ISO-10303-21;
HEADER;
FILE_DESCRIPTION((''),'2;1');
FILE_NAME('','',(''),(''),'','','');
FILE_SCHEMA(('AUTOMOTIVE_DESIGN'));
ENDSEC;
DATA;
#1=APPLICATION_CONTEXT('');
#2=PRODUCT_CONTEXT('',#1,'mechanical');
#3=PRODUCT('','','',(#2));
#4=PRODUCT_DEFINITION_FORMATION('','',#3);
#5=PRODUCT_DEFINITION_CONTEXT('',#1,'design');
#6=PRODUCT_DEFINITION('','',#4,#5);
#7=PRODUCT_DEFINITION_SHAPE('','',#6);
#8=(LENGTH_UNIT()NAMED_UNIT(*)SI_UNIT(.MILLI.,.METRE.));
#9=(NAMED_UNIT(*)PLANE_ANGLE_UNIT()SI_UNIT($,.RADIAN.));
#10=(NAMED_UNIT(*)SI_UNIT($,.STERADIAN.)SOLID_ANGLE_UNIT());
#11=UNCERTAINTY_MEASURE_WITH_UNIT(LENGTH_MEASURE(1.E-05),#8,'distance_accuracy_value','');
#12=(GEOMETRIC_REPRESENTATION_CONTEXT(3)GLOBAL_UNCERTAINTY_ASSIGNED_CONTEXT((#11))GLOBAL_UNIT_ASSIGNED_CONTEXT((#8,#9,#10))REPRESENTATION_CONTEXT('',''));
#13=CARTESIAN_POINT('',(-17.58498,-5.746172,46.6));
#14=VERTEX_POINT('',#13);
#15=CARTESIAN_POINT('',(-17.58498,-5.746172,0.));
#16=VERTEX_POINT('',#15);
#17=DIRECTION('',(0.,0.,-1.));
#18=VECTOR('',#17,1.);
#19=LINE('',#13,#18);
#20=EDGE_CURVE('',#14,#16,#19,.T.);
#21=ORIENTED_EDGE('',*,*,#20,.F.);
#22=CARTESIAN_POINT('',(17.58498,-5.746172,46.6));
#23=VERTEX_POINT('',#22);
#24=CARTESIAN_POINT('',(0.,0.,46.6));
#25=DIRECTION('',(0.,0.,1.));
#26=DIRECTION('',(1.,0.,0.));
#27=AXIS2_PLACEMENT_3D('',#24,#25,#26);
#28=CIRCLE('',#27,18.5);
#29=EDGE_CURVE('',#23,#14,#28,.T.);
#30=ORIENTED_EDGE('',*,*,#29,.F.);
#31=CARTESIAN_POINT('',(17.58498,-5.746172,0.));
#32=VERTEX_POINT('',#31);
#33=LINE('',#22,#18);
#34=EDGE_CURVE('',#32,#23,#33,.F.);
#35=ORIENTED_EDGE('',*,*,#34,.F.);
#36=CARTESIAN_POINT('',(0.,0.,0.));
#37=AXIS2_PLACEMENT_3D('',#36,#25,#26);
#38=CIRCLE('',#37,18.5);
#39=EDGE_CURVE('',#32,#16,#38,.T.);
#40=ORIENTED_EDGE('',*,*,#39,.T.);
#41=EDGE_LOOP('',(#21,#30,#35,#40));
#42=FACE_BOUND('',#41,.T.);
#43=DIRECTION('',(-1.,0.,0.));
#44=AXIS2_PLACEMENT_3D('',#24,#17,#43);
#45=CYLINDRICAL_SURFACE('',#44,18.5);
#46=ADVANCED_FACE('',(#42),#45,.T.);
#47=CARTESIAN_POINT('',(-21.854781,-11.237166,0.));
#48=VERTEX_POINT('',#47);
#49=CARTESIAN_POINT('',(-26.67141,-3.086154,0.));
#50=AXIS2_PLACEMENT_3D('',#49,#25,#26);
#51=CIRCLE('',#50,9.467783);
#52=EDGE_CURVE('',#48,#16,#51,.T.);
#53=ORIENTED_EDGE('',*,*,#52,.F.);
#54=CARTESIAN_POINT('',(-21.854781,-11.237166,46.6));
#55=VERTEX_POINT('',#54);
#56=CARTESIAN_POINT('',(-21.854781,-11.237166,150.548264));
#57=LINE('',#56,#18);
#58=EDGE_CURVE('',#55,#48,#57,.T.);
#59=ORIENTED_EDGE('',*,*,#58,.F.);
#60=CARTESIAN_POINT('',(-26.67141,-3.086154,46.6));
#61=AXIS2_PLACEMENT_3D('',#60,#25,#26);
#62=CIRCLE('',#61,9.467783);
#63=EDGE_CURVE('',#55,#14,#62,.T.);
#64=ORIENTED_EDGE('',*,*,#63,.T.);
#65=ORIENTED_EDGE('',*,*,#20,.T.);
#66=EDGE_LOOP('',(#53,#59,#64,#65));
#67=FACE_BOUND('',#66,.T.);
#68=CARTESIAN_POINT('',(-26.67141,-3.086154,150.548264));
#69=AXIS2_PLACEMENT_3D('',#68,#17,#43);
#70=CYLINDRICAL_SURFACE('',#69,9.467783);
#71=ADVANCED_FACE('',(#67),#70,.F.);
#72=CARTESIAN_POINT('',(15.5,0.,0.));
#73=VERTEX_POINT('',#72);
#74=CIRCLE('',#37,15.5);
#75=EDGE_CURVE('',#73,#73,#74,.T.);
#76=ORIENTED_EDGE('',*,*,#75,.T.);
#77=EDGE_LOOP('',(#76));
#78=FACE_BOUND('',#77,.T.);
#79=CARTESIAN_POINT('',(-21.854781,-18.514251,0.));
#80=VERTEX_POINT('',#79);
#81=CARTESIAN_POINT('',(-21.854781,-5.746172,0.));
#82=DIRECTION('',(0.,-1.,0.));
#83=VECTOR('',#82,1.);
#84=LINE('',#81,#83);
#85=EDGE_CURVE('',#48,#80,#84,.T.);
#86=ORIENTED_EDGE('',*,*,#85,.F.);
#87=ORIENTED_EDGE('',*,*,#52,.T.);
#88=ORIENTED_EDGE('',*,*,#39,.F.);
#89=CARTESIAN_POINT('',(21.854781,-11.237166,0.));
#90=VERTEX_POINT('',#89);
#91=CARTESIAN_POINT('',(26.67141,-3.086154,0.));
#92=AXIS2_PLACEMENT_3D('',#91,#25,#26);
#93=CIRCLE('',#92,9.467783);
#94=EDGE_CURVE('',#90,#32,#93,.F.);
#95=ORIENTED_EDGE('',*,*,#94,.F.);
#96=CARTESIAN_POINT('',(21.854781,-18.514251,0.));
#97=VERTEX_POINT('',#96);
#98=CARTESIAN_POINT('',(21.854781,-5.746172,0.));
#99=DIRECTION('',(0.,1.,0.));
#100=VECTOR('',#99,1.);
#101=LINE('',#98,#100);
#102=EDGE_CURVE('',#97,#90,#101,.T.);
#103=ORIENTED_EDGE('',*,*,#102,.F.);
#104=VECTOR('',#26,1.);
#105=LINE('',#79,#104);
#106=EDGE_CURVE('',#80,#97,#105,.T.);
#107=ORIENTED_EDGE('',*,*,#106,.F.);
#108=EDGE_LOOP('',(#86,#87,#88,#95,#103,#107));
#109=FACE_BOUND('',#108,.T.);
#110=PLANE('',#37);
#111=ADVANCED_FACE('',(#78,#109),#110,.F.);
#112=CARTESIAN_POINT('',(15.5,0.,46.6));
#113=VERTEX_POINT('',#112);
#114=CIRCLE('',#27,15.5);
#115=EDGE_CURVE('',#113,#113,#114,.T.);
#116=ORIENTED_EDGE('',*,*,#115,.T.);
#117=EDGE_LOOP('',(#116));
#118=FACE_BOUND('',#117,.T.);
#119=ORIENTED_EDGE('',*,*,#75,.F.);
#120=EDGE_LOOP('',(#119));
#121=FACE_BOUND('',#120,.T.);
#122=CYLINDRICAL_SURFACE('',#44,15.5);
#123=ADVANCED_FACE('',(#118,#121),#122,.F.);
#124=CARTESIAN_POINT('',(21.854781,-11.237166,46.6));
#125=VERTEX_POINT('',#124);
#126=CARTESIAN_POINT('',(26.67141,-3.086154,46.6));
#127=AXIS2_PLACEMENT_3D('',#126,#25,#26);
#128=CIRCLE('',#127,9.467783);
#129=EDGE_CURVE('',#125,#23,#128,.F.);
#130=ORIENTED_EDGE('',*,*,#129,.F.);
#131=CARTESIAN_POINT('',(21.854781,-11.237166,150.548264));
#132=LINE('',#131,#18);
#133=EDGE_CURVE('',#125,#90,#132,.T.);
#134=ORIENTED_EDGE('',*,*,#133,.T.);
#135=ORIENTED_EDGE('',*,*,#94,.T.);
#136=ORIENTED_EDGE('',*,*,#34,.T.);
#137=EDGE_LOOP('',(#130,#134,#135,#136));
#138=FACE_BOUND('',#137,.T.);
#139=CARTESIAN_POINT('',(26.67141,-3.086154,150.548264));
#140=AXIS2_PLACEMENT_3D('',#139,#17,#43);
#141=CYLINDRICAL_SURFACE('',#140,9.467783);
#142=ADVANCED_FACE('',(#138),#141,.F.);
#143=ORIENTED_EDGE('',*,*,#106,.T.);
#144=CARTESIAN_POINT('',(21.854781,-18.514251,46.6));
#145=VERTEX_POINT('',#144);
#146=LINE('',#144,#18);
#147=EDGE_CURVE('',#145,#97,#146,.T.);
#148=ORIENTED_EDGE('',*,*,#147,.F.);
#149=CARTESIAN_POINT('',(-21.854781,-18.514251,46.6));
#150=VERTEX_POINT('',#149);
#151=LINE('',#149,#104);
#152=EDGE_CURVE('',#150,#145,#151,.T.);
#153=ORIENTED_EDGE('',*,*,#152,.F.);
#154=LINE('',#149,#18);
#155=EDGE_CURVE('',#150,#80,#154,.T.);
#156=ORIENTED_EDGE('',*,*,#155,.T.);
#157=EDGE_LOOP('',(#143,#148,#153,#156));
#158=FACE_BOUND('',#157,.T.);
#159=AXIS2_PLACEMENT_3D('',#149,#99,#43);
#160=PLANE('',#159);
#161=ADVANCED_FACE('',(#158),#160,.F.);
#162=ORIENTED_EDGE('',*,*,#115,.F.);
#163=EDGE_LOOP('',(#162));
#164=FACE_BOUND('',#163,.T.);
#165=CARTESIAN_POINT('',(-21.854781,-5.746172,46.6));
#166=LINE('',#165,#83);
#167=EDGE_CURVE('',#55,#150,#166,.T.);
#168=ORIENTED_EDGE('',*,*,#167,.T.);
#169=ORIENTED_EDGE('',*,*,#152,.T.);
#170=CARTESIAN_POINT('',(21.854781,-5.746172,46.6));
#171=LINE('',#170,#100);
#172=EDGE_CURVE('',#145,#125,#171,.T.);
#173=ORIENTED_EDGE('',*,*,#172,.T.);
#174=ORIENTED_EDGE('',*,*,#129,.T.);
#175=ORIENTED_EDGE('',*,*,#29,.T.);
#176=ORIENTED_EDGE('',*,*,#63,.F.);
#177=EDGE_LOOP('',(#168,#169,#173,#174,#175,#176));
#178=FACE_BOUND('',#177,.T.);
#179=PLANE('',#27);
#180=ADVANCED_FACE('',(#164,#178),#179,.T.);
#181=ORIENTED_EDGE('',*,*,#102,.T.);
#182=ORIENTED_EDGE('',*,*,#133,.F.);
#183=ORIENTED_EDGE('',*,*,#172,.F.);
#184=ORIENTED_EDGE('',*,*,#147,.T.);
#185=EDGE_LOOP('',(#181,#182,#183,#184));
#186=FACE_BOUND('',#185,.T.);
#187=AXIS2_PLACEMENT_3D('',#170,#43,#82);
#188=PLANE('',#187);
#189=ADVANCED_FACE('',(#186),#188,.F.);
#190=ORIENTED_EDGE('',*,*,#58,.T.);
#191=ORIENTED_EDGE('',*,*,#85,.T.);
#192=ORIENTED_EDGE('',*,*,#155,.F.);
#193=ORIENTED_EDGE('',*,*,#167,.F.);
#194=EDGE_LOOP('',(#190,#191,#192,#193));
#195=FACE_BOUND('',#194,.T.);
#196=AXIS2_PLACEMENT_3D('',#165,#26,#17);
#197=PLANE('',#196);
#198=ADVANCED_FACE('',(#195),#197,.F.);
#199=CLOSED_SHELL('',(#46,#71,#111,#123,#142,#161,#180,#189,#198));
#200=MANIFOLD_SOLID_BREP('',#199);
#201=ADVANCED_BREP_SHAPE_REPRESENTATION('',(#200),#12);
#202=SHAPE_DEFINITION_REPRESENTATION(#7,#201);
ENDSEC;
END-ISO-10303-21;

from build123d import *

# Parameters (mm, degrees)
SKETCH1_R           = 18.5
SKETCH1_R_2         = 15.5
BOSS_EXTRUDE1_DEPTH = 46.6
SKETCH4_W           = 43.709561032
SKETCH4_H           = 12.768078571
BOSS_EXTRUDE2_DEPTH = 46.6
SKETCH5_R           = 15.5
CUT_EXTRUDE1_DEPTH  = 55.698893074
CUT_EXTRUDE4_DEPTH  = 46.6


# Read off the part's stored shape, not the designer's step: Cut-Extrude4
with BuildPart() as part:
    # Sketch1 → Boss-Extrude1 (new body)
    with BuildSketch(Plane.XY):
        Circle(SKETCH1_R)
        Circle(SKETCH1_R_2, mode=Mode.SUBTRACT)
    extrude(amount=BOSS_EXTRUDE1_DEPTH)

    # Sketch4 → Boss-Extrude2 (add, through all)
    with BuildSketch(Plane.XY):
        with Locations((0, -12.13021123)):
            Rectangle(SKETCH4_W, SKETCH4_H)
    extrude(amount=BOSS_EXTRUDE2_DEPTH)

    # Sketch5 → Cut-Extrude1 (cut, through all)
    with BuildSketch(Plane.XY):
        Circle(SKETCH5_R)
    extrude(amount=CUT_EXTRUDE1_DEPTH, mode=Mode.SUBTRACT)

    # Cut-Extrude4 outline → Cut-Extrude4 (cut)
    with BuildSketch(Plane.XY):
        with BuildLine():
            ThreePointArc((-21.854780516, -11.237165736), (-19.197353427, -8.897985946), (-17.584979613, -5.746171944))
            Line((-17.584979613, -5.746171944), (-21.854780516, -5.746171944))
            Line((-21.854780516, -5.746171944), (-21.854780516, -11.237165736))
        make_face()
    cut_extrude4 = extrude(amount=CUT_EXTRUDE4_DEPTH, mode=Mode.SUBTRACT)

    # Mirror2: Cut-Extrude4 across plane
    add(cut_extrude4.mirror(Plane(origin=(0, 0, 0), x_dir=(0, 0, 1), z_dir=(1, 0, 0))), mode=Mode.SUBTRACT)


solid = part.part
